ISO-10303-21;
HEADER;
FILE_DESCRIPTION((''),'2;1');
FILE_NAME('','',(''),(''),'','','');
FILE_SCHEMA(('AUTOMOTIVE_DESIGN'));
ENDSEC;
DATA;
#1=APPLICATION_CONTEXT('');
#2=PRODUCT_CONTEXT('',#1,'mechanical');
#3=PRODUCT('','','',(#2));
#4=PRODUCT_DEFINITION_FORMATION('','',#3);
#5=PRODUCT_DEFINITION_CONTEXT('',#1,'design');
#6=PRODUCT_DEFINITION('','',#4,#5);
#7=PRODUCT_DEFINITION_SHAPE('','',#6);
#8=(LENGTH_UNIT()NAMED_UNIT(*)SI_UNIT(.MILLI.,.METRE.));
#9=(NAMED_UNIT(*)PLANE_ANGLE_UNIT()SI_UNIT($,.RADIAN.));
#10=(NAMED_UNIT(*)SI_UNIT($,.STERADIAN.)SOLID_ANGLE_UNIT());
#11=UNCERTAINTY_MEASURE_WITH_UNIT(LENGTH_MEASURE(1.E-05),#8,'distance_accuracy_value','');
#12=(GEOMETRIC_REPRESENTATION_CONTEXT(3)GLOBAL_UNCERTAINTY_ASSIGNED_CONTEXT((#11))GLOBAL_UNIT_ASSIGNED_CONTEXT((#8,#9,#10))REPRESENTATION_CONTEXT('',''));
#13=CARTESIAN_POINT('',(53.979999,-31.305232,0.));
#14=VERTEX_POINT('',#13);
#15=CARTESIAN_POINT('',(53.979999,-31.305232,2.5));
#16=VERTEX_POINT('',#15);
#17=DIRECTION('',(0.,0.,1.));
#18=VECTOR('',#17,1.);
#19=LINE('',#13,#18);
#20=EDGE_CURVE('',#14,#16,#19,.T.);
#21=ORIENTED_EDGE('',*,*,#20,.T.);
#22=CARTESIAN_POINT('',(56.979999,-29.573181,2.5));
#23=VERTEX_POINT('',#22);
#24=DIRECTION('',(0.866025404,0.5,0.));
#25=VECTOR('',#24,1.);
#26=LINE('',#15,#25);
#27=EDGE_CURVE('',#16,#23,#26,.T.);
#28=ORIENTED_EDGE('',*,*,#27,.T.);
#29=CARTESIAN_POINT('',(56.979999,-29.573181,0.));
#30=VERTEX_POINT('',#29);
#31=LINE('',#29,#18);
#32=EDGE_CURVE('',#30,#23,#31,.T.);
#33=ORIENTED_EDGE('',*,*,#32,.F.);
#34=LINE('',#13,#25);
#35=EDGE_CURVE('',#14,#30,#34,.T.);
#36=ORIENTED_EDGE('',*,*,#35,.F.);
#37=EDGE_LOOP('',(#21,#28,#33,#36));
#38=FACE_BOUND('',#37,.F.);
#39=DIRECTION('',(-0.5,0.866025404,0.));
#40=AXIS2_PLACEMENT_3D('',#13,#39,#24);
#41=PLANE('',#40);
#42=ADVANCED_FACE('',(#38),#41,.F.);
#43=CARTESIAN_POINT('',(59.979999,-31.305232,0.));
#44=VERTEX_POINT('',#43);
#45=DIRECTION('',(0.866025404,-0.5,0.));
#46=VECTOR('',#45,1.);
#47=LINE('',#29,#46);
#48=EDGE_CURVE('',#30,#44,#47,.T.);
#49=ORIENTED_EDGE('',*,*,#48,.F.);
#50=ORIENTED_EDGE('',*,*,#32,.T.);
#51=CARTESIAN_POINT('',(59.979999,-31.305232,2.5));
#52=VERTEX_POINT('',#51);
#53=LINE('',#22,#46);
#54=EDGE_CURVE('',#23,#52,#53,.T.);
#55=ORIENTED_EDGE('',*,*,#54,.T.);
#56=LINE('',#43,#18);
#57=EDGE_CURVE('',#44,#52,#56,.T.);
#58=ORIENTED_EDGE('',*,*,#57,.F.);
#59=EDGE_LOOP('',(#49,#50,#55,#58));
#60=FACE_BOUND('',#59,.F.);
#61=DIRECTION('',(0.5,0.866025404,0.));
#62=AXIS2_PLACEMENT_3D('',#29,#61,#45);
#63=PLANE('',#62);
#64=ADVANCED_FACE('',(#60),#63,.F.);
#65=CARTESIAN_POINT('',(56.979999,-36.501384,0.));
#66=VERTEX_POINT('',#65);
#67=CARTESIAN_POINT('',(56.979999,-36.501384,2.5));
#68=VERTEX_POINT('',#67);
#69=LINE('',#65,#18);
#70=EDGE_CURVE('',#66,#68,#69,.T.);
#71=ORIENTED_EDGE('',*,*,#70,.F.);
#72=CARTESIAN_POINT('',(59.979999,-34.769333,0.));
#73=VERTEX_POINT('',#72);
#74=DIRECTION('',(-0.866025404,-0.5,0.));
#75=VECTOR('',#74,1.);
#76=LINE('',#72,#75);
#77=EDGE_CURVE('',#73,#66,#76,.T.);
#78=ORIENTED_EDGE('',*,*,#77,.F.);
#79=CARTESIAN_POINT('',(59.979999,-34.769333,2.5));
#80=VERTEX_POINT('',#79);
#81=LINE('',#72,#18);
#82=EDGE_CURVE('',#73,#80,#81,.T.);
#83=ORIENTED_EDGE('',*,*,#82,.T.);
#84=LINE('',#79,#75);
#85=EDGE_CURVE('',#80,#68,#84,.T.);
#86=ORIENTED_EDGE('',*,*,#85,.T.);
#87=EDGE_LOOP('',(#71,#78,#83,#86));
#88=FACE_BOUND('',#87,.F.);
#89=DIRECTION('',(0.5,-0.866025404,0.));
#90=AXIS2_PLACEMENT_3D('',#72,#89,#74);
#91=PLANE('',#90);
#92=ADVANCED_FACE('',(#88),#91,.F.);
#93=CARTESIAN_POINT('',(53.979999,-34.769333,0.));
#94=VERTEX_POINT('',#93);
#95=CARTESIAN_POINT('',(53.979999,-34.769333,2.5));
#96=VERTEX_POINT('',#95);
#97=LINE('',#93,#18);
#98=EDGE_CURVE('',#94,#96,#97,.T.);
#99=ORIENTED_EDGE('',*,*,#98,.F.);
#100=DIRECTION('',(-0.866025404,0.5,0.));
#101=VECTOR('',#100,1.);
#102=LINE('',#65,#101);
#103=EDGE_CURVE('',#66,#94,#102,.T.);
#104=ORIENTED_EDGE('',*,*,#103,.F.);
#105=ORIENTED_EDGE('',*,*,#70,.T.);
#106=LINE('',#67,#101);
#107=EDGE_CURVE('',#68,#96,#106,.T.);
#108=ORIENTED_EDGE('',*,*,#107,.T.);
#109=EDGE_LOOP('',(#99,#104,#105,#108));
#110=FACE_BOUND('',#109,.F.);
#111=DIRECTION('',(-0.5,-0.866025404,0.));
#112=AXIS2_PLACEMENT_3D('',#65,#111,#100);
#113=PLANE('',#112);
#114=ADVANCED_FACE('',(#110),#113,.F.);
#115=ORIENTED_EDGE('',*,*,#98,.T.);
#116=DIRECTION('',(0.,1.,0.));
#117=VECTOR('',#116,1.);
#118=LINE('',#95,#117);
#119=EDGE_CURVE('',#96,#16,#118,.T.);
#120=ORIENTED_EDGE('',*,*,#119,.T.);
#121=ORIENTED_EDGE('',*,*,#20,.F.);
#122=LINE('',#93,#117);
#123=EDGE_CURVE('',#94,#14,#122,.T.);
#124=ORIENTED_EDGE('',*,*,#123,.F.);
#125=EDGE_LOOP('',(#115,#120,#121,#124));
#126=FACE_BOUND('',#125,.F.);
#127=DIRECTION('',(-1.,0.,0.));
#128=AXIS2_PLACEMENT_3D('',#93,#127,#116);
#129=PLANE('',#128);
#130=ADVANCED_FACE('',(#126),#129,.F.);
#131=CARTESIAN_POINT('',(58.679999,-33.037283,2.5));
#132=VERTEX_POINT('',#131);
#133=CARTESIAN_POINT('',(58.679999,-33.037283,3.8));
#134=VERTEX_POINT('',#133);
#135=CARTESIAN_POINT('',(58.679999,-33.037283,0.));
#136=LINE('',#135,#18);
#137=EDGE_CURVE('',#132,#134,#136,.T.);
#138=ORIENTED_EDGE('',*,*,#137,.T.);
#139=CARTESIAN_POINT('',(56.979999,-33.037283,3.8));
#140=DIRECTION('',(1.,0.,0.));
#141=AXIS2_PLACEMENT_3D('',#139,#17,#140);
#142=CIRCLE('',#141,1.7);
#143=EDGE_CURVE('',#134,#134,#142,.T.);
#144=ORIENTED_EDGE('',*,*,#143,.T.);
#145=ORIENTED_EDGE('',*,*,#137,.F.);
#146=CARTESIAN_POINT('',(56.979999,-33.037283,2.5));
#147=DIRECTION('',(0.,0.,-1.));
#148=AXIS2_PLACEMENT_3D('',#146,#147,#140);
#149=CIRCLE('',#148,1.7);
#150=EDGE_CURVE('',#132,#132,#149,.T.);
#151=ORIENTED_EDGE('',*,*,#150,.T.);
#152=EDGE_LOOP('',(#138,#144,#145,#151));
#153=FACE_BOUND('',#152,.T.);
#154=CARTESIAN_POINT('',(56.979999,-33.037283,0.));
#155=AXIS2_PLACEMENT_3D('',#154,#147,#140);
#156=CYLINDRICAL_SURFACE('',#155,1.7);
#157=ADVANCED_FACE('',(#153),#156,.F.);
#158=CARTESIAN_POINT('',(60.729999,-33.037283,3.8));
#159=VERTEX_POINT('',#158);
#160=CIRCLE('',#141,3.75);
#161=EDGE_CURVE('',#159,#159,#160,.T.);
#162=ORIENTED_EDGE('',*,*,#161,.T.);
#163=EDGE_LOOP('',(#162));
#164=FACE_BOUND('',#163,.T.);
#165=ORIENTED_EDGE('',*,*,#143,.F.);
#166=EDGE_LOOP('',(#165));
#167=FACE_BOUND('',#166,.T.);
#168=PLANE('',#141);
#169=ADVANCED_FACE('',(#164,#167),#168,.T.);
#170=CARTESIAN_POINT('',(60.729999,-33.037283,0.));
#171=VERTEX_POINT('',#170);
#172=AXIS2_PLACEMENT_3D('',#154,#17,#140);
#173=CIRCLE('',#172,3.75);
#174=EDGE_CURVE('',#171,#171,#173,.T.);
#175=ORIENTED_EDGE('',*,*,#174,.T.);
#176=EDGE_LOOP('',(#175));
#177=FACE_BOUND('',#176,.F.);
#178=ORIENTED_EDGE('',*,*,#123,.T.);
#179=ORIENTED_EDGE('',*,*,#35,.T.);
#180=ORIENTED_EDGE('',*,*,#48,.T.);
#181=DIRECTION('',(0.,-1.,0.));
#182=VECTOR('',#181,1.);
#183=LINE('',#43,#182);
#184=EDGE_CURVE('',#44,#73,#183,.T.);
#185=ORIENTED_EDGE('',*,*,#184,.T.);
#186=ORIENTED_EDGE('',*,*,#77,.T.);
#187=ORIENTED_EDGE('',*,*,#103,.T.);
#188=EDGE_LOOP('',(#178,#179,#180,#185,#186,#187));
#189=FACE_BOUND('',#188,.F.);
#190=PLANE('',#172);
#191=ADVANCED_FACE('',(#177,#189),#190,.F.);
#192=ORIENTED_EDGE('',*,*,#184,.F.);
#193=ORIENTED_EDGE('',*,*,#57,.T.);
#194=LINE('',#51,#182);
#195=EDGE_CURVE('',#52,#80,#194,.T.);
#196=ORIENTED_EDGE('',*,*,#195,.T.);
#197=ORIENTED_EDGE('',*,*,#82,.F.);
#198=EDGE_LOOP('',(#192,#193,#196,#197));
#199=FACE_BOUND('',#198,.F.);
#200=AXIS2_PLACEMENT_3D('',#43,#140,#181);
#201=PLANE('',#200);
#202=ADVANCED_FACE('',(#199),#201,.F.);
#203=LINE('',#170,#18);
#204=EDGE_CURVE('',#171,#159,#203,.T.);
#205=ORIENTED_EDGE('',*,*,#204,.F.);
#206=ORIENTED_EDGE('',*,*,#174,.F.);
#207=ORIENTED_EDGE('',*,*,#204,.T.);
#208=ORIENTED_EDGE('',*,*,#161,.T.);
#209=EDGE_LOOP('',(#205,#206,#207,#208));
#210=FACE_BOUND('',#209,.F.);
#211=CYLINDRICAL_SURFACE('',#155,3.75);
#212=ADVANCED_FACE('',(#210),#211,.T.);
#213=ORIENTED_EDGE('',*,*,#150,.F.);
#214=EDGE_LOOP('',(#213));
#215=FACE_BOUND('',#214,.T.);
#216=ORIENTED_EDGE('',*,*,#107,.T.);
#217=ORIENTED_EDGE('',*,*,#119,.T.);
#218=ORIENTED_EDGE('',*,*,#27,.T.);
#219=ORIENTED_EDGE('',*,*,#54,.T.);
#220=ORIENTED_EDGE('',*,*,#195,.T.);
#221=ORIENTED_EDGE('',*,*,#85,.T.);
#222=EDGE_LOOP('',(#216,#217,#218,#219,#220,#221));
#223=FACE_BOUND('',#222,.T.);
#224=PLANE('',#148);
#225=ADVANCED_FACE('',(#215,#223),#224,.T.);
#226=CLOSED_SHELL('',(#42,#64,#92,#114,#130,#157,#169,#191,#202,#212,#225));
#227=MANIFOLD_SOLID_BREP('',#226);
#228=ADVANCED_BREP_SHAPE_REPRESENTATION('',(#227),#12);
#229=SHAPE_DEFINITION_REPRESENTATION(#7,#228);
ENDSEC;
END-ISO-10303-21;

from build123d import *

# Parameters (mm, degrees)
F0_R     = 3.75
F0_R_2   = 1.7
F1_DEPTH = 3.8
F3_DEPTH = 2.5


# Not quite as in the source:
# - a feature of the source that left no trace in its solid (it failed there, or was rolled back) is left out


with BuildPart() as f1:
    # F0 (on Top) → F1 (new body)
    with BuildSketch(Plane.XY):
        with Locations((56.9799989462, -33.0372825265)):
            Circle(F0_R)
        with Locations((56.9799989462, -33.0372825265)):
            Circle(F0_R_2, mode=Mode.SUBTRACT)
    extrude(amount=F1_DEPTH)

    # F2 (on face) → F3 (cut)
    with BuildSketch(Plane(origin=(0, 0, 0), x_dir=(1, 0, 0), z_dir=(0, 0, -1))):
        Polygon((59.9799989462, 31.3052317189), (59.9799989462, 34.7693333341), (56.9799989462, 36.5013841416), (53.9799989462, 34.7693333341), (53.9799989462, 31.3052317189), (56.9799989462, 29.5731809114), align=None)
    extrude(amount=-F3_DEPTH, mode=Mode.SUBTRACT)


solid = f1.part
